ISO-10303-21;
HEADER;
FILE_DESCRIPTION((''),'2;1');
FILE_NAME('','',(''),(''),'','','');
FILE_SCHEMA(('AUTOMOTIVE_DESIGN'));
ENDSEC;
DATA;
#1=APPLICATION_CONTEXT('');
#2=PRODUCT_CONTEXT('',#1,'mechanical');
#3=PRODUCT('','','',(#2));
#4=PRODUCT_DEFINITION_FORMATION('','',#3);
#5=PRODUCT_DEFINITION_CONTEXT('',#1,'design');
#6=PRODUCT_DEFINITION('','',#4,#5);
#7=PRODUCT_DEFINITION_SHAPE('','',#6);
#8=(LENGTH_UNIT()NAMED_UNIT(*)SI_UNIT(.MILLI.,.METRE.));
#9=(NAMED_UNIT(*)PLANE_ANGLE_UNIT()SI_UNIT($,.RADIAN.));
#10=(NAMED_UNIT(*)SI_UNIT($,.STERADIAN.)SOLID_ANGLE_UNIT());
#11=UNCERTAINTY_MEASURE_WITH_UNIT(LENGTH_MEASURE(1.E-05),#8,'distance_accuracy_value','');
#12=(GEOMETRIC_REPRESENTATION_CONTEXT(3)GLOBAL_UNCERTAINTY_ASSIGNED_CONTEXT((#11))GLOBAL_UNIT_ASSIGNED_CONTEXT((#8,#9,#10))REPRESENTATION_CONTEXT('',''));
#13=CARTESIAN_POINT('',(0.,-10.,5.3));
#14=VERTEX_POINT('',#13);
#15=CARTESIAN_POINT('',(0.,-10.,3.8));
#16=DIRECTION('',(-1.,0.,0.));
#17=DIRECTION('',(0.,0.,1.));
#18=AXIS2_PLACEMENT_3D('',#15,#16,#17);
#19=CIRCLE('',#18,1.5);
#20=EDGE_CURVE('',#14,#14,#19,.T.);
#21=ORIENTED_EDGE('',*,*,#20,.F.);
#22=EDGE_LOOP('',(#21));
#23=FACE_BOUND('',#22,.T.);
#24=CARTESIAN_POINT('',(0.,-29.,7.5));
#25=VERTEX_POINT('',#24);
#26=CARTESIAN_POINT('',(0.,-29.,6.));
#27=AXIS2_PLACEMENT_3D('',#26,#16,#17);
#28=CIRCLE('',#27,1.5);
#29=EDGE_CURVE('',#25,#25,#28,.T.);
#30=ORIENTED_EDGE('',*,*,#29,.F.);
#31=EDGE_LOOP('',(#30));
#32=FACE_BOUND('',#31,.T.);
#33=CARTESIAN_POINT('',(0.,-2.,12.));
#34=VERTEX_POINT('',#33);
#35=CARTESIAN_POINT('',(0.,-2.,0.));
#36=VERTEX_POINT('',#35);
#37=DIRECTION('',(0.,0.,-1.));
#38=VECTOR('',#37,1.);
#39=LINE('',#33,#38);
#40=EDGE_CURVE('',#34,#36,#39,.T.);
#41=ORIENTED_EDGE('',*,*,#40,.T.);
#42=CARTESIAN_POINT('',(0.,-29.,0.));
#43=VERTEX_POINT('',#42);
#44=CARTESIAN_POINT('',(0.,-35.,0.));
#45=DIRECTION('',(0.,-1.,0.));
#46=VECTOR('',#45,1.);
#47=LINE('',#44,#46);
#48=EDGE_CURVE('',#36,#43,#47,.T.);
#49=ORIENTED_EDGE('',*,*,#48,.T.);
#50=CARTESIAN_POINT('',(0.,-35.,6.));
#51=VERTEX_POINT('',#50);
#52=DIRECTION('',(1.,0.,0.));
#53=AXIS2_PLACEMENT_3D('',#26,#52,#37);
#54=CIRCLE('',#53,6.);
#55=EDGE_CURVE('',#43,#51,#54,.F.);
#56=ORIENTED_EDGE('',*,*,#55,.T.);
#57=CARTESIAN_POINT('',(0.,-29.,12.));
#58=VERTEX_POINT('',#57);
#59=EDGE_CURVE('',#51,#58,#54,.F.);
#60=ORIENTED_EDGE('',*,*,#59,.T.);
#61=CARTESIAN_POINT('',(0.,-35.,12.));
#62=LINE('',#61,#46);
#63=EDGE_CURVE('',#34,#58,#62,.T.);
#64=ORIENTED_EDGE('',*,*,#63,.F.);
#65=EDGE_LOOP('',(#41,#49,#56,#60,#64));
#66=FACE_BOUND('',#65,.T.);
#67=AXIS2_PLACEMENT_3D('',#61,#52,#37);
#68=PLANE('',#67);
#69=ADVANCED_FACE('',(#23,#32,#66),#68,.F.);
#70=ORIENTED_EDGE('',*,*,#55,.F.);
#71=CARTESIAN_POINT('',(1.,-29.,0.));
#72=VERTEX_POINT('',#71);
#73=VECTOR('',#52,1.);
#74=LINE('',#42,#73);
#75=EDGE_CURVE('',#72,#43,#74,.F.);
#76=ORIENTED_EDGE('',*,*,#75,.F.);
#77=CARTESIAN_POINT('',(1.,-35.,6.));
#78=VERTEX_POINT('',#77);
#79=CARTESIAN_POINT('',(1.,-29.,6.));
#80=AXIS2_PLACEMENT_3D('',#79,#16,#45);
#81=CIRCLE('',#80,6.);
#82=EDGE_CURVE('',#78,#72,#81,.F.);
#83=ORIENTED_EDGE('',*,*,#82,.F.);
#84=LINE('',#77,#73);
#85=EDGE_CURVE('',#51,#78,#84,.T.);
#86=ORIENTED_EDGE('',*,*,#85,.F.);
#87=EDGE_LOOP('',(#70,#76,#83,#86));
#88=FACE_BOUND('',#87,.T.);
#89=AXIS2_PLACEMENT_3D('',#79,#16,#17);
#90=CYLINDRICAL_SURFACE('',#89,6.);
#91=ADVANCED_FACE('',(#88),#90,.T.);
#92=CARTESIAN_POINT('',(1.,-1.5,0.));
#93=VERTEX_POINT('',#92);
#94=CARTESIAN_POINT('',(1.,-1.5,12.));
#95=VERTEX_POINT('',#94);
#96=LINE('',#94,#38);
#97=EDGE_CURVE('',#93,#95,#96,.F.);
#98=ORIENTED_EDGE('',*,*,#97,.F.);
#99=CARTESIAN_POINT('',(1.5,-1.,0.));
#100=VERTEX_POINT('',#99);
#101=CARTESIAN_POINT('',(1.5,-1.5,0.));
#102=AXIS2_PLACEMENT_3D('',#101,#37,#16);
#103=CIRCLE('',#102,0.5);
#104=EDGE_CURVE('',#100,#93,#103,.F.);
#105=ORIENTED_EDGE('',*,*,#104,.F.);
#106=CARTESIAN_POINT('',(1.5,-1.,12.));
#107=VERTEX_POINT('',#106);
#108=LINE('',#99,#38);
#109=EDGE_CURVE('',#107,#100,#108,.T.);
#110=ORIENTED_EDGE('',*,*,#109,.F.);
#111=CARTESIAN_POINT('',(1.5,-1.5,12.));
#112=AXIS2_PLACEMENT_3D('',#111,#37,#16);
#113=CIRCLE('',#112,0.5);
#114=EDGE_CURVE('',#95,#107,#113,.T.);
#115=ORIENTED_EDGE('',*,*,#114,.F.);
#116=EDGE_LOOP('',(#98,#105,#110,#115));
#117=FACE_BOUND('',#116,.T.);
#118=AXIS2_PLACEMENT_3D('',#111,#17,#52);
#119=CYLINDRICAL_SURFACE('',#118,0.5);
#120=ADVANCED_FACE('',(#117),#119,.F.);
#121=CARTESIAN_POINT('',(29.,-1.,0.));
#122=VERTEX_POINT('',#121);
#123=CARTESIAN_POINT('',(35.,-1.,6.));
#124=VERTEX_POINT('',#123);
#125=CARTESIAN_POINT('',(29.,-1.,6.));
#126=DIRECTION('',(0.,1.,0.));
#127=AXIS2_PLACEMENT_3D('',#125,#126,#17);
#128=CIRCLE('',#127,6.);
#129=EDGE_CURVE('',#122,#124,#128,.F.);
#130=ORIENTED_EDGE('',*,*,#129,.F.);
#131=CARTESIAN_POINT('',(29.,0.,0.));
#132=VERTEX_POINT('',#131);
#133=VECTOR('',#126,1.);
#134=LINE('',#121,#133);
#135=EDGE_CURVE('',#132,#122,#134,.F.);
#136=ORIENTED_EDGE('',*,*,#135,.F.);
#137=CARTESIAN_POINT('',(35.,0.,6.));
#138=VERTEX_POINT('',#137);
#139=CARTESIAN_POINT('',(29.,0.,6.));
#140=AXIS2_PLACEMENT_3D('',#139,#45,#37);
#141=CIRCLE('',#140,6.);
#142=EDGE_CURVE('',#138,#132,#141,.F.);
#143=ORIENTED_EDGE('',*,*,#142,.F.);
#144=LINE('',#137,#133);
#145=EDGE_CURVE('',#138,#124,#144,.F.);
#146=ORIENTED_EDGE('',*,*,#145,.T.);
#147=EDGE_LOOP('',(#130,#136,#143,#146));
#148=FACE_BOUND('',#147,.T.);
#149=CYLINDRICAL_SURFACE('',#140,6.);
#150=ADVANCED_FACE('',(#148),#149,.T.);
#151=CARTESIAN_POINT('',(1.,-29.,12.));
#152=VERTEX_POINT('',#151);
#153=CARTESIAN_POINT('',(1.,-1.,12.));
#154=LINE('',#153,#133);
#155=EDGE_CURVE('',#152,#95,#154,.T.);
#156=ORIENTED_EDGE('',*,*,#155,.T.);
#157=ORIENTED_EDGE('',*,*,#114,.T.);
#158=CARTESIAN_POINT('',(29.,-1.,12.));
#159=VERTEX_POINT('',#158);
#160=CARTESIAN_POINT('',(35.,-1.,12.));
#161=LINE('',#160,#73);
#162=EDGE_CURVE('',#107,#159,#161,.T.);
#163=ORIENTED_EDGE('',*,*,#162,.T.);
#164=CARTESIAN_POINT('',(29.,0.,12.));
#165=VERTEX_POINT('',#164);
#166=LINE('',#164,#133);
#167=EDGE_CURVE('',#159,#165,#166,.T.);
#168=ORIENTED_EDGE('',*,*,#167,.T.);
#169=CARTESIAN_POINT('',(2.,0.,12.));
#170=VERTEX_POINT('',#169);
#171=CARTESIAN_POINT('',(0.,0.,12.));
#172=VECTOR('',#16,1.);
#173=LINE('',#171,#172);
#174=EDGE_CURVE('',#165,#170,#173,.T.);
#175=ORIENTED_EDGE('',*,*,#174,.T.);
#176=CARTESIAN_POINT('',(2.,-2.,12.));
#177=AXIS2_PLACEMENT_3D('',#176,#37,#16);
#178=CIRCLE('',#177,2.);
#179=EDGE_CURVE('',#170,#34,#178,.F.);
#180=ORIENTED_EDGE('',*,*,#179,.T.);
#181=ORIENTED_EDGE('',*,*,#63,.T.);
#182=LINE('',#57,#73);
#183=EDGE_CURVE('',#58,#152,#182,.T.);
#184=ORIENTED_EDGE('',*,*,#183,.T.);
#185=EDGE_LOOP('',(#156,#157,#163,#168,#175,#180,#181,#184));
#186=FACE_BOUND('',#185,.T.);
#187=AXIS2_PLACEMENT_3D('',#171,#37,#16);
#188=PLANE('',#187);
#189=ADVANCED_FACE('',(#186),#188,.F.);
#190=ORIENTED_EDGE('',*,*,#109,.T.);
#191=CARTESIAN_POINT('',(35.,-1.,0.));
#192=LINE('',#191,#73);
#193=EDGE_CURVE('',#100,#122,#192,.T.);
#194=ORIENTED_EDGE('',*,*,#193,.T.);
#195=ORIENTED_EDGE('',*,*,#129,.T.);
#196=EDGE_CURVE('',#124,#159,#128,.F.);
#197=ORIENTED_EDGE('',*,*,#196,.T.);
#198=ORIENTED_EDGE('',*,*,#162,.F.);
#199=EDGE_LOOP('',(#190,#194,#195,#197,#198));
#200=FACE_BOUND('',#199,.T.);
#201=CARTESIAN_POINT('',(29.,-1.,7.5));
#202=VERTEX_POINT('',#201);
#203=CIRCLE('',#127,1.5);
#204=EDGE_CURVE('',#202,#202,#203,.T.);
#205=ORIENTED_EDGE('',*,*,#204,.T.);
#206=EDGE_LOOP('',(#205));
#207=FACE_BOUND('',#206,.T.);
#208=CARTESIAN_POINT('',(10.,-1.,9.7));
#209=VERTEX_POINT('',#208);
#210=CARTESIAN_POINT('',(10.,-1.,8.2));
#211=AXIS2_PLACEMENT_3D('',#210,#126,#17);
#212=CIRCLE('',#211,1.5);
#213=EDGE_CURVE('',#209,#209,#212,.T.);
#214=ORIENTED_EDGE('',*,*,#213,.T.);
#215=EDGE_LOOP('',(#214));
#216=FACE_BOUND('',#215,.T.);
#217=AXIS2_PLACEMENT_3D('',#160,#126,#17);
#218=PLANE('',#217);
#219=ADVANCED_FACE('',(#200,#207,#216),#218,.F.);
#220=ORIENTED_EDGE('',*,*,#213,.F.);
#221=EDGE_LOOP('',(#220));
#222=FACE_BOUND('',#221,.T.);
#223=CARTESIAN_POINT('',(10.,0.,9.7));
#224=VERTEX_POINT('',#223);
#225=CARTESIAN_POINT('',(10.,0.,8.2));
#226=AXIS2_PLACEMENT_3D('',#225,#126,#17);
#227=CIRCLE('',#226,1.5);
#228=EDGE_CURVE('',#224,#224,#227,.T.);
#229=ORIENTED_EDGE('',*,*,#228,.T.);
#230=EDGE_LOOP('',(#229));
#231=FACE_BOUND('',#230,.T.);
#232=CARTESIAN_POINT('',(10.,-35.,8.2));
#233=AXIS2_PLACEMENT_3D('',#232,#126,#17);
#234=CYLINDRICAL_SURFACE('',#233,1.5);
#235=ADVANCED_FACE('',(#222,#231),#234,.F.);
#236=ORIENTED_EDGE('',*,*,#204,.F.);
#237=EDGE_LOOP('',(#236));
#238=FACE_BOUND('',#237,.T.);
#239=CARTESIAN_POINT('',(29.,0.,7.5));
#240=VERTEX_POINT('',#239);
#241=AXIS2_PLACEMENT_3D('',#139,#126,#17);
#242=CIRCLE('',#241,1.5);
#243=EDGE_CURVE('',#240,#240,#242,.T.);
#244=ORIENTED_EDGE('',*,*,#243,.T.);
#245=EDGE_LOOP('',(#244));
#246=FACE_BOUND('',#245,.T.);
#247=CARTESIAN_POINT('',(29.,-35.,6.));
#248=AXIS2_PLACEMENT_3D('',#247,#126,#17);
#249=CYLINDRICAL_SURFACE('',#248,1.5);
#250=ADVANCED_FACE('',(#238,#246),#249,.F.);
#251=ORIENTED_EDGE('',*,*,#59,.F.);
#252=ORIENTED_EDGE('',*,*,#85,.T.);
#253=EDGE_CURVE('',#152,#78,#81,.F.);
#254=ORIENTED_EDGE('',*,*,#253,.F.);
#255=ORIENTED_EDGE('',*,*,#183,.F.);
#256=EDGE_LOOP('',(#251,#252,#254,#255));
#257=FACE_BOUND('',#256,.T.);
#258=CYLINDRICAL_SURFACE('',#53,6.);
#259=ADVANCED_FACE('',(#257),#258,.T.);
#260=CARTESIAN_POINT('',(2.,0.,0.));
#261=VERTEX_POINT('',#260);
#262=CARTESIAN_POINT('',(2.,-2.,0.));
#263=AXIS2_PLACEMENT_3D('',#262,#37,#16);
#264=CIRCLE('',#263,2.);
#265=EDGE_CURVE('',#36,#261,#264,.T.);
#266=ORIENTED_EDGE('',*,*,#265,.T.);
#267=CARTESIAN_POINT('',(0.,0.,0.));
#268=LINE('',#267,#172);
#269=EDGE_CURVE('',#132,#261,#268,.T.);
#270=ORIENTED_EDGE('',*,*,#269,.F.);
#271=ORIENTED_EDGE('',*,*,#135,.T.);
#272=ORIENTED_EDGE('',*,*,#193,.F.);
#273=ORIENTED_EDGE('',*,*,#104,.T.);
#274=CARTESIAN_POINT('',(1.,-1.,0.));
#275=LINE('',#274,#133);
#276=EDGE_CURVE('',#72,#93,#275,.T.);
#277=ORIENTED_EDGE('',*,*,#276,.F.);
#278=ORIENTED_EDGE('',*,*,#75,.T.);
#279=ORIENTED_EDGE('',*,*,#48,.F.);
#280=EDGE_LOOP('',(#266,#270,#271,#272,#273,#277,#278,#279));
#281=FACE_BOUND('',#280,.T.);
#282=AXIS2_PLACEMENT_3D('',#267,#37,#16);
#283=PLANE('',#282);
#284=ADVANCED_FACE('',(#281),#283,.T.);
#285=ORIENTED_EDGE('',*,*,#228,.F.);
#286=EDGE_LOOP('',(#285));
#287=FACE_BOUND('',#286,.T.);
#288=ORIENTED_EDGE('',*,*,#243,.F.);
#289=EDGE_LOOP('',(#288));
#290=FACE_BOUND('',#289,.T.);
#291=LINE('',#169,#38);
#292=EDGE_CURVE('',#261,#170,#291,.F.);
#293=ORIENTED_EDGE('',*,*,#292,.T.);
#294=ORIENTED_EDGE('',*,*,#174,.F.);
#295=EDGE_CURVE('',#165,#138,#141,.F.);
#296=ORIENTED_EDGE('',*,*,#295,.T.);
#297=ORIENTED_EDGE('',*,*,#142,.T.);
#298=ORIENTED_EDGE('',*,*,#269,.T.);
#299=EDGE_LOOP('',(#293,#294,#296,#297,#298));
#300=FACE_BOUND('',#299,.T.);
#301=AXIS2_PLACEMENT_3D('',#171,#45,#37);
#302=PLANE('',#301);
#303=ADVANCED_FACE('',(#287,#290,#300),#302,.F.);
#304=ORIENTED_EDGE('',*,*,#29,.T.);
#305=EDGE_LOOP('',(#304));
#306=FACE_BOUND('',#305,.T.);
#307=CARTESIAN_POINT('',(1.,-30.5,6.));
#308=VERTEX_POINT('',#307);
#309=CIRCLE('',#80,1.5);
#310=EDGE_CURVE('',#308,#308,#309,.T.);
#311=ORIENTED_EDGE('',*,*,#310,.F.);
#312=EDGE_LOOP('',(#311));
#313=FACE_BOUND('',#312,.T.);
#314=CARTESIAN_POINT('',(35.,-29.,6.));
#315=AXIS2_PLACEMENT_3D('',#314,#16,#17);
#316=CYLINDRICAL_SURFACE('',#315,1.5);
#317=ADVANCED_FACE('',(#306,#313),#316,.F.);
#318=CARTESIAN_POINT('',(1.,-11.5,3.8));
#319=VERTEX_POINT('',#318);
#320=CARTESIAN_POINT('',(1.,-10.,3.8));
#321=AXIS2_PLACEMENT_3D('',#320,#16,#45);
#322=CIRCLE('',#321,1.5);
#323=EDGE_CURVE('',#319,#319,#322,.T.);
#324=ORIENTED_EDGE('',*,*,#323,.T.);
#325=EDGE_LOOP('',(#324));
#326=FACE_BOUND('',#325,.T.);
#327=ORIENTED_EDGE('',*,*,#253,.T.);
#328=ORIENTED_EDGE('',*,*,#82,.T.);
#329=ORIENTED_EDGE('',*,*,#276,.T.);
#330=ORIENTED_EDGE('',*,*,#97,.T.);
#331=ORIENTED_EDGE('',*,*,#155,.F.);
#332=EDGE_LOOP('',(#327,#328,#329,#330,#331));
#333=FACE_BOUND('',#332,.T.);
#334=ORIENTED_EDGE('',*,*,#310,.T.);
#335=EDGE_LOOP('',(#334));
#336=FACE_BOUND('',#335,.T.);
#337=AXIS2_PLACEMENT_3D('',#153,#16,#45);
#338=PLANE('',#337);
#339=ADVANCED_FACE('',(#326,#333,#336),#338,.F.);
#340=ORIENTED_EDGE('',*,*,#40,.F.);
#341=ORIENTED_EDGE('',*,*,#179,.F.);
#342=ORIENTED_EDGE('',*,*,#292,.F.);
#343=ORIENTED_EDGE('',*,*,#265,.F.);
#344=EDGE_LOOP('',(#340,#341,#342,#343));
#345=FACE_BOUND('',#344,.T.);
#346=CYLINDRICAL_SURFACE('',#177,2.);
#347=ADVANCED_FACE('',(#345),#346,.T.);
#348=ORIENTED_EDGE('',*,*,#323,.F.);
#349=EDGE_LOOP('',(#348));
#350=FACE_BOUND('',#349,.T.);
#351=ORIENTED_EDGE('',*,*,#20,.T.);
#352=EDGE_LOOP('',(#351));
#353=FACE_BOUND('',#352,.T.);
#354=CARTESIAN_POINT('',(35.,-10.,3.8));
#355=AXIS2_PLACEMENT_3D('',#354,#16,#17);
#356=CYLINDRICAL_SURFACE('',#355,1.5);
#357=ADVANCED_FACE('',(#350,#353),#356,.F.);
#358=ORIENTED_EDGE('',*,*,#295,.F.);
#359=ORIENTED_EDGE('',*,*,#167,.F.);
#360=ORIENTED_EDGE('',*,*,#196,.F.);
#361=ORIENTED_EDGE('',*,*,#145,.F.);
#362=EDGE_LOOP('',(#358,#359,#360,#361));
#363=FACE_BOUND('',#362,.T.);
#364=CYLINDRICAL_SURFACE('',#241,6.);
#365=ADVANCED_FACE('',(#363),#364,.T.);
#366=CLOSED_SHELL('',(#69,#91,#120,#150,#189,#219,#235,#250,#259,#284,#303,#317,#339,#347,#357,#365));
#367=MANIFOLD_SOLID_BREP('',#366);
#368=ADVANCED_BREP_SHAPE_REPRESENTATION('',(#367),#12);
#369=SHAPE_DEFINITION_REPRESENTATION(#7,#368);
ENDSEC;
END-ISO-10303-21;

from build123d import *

# Parameters (mm, degrees)
EXTRUDE_1_DEPTH     = 12
FILLET_1_R          = 6
FILLET_2_R          = 2
FILLET_3_R          = 0.5
SKETCH_2_R          = 1.5
CUT_EXTRUDE_1_DEPTH = 51.931326313
SKETCH_3_R          = 1.5
CUT_EXTRUDE_2_DEPTH = 51.931326313


with BuildPart() as part:
    # 草图1 → 凸台-拉伸1 (new body)
    with BuildSketch(Plane.XY):
        Polygon((0, 0), (35, 0), (35, -1), (1, -1), (1, -35), (0, -35), align=None)
    extrude(amount=EXTRUDE_1_DEPTH)

    # 圆角1
    fillet_1_edges = [part.edges().sort_by_distance(p)[0] for p in [
        (0.5, -35, 12),
        (0.5, -35, 0),
        (35, -0.5, 0),
        (35, -0.5, 12),
    ]]
    fillet(fillet_1_edges, radius=FILLET_1_R - 0.0001)  # a hair under: the kernel refuses the full size

    # 圆角2
    fillet_2_edges = [part.edges().sort_by_distance(p)[0] for p in [
        (0, 0, 6),
    ]]
    fillet(fillet_2_edges, radius=FILLET_2_R)

    # 圆角3
    fillet_3_edges = [part.edges().sort_by_distance(p)[0] for p in [
        (1, -1, 6),
    ]]
    fillet(fillet_3_edges, radius=FILLET_3_R)

    # 草图2 → 切除-拉伸1 (cut, through all)
    with BuildSketch(Plane.ZY):
        with Locations((6, -29)):
            Circle(SKETCH_2_R)
        with Locations((3.8, -10)):
            Circle(SKETCH_2_R)
    extrude(amount=-CUT_EXTRUDE_1_DEPTH, mode=Mode.SUBTRACT)

    # 草图3 → 切除-拉伸2 (cut, through all)
    with BuildSketch(Plane(origin=(0, 0, 0), x_dir=(1, 0, 0), z_dir=(0, 1, 0))):
        with Locations(Location((29, -6, 0), (0, 0, 270))):
            Circle(SKETCH_3_R)
        with Locations(Location((10, -8.2, 0), (0, 0, 270))):
            Circle(SKETCH_3_R)
    extrude(amount=-CUT_EXTRUDE_2_DEPTH, mode=Mode.SUBTRACT)


solid = part.part
